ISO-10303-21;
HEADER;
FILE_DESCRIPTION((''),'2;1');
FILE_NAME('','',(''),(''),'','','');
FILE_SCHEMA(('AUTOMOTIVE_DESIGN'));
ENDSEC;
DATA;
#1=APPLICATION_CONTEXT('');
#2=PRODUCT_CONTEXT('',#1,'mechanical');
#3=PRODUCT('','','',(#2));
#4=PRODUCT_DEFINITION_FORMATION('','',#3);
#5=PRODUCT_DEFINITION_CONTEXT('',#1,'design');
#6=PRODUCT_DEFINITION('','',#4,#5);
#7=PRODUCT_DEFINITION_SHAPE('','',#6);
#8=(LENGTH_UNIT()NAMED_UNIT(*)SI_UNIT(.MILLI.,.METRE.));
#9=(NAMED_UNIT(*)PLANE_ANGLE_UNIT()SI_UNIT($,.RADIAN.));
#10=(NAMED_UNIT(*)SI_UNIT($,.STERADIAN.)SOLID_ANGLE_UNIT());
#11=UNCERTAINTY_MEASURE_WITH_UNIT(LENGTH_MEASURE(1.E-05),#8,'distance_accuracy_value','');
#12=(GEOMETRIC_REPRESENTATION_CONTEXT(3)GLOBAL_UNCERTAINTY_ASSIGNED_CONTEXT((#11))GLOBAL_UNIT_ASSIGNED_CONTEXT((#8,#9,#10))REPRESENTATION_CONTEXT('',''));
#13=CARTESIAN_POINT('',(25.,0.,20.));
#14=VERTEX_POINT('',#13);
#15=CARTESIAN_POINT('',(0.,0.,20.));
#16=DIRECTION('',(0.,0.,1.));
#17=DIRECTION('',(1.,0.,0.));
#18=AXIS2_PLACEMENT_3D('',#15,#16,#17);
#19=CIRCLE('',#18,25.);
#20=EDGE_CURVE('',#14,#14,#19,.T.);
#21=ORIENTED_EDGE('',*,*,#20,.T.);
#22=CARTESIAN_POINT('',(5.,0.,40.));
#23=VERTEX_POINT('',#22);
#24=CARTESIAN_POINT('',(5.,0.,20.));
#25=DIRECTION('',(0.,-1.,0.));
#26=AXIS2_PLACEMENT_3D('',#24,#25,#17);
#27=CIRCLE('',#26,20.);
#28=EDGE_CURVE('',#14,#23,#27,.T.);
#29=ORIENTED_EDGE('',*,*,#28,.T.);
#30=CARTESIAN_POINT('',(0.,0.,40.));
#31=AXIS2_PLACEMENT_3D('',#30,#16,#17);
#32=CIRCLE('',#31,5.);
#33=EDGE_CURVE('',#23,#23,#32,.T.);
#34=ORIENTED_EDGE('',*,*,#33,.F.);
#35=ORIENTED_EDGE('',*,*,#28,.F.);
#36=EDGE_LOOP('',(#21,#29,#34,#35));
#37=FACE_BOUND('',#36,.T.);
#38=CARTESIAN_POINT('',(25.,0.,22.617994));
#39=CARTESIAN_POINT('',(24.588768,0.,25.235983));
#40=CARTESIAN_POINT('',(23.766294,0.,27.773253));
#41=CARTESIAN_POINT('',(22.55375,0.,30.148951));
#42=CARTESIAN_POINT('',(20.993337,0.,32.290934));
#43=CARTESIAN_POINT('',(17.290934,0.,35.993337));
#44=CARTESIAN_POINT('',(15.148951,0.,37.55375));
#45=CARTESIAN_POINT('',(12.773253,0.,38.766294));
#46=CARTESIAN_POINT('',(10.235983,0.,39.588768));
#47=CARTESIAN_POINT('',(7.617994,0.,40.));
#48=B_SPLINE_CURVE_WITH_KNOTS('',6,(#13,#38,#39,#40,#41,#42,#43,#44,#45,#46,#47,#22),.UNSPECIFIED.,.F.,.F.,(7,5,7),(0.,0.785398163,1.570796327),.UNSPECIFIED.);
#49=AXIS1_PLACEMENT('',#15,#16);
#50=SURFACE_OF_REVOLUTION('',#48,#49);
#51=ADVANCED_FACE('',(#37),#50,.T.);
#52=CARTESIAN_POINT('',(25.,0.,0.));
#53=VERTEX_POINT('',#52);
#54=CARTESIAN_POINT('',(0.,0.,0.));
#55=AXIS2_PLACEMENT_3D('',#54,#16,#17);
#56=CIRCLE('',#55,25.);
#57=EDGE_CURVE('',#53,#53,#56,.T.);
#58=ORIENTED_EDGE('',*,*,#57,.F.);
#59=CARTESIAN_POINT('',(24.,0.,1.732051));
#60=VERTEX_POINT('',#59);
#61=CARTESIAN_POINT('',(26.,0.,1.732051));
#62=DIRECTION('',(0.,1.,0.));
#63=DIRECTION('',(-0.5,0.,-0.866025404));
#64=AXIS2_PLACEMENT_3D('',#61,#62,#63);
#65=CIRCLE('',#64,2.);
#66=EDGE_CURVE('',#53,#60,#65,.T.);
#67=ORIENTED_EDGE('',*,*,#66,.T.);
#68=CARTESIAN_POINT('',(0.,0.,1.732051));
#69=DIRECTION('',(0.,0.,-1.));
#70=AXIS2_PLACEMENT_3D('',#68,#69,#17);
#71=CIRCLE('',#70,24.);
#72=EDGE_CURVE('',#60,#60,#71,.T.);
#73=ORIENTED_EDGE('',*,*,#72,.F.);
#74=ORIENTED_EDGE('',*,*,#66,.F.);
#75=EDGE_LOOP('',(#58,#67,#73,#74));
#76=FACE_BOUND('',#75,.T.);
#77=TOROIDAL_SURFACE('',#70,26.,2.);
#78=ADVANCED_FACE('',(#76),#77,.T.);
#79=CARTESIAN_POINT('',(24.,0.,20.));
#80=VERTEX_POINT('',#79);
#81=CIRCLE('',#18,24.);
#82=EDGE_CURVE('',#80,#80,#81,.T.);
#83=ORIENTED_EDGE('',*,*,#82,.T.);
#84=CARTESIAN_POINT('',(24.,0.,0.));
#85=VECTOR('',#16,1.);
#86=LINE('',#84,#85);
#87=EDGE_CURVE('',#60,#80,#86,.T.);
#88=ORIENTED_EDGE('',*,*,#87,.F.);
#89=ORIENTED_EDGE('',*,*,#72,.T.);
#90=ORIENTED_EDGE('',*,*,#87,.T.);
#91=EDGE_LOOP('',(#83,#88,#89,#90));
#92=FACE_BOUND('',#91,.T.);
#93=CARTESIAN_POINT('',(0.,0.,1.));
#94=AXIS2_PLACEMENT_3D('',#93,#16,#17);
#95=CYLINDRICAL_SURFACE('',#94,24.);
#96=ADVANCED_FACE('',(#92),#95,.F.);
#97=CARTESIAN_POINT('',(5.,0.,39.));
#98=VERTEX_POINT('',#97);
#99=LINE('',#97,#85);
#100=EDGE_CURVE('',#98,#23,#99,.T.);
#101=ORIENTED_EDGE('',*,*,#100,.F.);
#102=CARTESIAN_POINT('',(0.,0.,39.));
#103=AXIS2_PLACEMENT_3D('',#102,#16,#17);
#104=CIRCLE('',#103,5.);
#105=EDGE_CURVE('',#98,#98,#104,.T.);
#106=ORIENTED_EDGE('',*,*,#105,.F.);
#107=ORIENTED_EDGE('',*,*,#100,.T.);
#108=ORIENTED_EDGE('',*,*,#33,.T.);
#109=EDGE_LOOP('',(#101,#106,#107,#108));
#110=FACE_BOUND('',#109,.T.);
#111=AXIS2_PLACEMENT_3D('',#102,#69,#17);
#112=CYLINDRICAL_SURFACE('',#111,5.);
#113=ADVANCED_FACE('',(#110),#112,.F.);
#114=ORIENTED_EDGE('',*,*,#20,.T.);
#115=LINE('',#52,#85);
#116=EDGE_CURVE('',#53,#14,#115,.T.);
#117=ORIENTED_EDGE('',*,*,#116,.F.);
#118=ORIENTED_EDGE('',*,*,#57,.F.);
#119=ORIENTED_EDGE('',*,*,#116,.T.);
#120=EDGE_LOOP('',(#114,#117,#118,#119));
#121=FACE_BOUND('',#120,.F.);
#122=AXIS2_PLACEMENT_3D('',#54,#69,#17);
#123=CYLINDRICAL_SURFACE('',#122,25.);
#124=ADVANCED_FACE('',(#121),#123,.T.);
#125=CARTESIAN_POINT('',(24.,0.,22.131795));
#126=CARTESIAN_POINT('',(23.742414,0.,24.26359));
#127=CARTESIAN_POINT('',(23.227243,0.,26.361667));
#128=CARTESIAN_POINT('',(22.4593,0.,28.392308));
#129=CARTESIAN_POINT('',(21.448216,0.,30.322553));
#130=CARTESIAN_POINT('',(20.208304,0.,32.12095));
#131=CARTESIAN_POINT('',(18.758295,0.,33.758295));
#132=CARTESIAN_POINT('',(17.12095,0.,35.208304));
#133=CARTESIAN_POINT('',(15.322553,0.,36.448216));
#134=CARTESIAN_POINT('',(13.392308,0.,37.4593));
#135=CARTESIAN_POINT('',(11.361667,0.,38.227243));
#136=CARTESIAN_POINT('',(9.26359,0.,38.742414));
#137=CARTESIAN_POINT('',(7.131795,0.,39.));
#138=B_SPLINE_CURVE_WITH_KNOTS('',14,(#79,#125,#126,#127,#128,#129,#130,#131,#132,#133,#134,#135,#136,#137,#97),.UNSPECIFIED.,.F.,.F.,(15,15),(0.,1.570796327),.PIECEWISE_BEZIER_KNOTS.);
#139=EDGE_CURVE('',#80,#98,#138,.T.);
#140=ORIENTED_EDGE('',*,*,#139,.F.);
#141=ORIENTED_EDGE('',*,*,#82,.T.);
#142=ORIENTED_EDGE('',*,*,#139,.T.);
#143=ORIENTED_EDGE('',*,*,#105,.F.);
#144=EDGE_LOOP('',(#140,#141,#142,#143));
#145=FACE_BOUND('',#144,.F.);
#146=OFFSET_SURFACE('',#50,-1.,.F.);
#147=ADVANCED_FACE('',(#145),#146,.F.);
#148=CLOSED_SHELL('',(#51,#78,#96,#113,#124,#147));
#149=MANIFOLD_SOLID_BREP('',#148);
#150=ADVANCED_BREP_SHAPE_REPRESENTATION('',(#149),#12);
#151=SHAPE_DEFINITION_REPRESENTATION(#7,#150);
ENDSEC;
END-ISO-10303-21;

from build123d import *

# Parameters (mm, degrees)
F0_R     = 25
F1_DEPTH = 40
F2_R     = 20
F3_T     = -1


# Not quite as in the source:
# - a fillet or chamfer that OpenCascade refuses, or shapes differently, is made with other operations: its cross-section is extruded or revolved along the edge and cut away or added


with BuildPart() as f1:
    # F0 (on Top) → F1 (new body)
    with BuildSketch(Plane.XY):
        Circle(F0_R)
    extrude(amount=F1_DEPTH)

    # F2
    f2_edges = [f1.edges().sort_by_distance(p)[0] for p in [
        (-25, 0, 40),
    ]]
    fillet(f2_edges, radius=F2_R)

    # F3: a shell. OpenCascade refuses it in one call, so the cavity is built on its own and cut out:
    # the body offset inwards by the wall thickness, plus a prism from it out through each open face.
    f3_core = offset(f1.part, amount=F3_T, mode=Mode.PRIVATE)
    f3_exits = [f3_core.faces().sort_by_distance(p)[0] for p in [
        (0, 0, 39),
        (0, 0, 1),
    ]]
    add(f3_core, mode=Mode.SUBTRACT)
    extrude(f3_exits, amount=-F3_T, mode=Mode.SUBTRACT)

    # F4: fillet of radius 2 on 1 edges, made by hand

    # F4_s1 → F4_t2 (revolve, cut)
    with BuildSketch(Plane.XZ):
        with BuildLine():
            ThreePointArc((25, 0), (24.2679491924, 0.7320508076), (24, 1.7320508076))
            Line((24, 1.7320508076), (24, 0))
            Line((24, 0), (25, 0))
        make_face()
    revolve(axis=Axis((0, 0, 0), (0, 0, -1)), mode=Mode.SUBTRACT)


solid = f1.part
